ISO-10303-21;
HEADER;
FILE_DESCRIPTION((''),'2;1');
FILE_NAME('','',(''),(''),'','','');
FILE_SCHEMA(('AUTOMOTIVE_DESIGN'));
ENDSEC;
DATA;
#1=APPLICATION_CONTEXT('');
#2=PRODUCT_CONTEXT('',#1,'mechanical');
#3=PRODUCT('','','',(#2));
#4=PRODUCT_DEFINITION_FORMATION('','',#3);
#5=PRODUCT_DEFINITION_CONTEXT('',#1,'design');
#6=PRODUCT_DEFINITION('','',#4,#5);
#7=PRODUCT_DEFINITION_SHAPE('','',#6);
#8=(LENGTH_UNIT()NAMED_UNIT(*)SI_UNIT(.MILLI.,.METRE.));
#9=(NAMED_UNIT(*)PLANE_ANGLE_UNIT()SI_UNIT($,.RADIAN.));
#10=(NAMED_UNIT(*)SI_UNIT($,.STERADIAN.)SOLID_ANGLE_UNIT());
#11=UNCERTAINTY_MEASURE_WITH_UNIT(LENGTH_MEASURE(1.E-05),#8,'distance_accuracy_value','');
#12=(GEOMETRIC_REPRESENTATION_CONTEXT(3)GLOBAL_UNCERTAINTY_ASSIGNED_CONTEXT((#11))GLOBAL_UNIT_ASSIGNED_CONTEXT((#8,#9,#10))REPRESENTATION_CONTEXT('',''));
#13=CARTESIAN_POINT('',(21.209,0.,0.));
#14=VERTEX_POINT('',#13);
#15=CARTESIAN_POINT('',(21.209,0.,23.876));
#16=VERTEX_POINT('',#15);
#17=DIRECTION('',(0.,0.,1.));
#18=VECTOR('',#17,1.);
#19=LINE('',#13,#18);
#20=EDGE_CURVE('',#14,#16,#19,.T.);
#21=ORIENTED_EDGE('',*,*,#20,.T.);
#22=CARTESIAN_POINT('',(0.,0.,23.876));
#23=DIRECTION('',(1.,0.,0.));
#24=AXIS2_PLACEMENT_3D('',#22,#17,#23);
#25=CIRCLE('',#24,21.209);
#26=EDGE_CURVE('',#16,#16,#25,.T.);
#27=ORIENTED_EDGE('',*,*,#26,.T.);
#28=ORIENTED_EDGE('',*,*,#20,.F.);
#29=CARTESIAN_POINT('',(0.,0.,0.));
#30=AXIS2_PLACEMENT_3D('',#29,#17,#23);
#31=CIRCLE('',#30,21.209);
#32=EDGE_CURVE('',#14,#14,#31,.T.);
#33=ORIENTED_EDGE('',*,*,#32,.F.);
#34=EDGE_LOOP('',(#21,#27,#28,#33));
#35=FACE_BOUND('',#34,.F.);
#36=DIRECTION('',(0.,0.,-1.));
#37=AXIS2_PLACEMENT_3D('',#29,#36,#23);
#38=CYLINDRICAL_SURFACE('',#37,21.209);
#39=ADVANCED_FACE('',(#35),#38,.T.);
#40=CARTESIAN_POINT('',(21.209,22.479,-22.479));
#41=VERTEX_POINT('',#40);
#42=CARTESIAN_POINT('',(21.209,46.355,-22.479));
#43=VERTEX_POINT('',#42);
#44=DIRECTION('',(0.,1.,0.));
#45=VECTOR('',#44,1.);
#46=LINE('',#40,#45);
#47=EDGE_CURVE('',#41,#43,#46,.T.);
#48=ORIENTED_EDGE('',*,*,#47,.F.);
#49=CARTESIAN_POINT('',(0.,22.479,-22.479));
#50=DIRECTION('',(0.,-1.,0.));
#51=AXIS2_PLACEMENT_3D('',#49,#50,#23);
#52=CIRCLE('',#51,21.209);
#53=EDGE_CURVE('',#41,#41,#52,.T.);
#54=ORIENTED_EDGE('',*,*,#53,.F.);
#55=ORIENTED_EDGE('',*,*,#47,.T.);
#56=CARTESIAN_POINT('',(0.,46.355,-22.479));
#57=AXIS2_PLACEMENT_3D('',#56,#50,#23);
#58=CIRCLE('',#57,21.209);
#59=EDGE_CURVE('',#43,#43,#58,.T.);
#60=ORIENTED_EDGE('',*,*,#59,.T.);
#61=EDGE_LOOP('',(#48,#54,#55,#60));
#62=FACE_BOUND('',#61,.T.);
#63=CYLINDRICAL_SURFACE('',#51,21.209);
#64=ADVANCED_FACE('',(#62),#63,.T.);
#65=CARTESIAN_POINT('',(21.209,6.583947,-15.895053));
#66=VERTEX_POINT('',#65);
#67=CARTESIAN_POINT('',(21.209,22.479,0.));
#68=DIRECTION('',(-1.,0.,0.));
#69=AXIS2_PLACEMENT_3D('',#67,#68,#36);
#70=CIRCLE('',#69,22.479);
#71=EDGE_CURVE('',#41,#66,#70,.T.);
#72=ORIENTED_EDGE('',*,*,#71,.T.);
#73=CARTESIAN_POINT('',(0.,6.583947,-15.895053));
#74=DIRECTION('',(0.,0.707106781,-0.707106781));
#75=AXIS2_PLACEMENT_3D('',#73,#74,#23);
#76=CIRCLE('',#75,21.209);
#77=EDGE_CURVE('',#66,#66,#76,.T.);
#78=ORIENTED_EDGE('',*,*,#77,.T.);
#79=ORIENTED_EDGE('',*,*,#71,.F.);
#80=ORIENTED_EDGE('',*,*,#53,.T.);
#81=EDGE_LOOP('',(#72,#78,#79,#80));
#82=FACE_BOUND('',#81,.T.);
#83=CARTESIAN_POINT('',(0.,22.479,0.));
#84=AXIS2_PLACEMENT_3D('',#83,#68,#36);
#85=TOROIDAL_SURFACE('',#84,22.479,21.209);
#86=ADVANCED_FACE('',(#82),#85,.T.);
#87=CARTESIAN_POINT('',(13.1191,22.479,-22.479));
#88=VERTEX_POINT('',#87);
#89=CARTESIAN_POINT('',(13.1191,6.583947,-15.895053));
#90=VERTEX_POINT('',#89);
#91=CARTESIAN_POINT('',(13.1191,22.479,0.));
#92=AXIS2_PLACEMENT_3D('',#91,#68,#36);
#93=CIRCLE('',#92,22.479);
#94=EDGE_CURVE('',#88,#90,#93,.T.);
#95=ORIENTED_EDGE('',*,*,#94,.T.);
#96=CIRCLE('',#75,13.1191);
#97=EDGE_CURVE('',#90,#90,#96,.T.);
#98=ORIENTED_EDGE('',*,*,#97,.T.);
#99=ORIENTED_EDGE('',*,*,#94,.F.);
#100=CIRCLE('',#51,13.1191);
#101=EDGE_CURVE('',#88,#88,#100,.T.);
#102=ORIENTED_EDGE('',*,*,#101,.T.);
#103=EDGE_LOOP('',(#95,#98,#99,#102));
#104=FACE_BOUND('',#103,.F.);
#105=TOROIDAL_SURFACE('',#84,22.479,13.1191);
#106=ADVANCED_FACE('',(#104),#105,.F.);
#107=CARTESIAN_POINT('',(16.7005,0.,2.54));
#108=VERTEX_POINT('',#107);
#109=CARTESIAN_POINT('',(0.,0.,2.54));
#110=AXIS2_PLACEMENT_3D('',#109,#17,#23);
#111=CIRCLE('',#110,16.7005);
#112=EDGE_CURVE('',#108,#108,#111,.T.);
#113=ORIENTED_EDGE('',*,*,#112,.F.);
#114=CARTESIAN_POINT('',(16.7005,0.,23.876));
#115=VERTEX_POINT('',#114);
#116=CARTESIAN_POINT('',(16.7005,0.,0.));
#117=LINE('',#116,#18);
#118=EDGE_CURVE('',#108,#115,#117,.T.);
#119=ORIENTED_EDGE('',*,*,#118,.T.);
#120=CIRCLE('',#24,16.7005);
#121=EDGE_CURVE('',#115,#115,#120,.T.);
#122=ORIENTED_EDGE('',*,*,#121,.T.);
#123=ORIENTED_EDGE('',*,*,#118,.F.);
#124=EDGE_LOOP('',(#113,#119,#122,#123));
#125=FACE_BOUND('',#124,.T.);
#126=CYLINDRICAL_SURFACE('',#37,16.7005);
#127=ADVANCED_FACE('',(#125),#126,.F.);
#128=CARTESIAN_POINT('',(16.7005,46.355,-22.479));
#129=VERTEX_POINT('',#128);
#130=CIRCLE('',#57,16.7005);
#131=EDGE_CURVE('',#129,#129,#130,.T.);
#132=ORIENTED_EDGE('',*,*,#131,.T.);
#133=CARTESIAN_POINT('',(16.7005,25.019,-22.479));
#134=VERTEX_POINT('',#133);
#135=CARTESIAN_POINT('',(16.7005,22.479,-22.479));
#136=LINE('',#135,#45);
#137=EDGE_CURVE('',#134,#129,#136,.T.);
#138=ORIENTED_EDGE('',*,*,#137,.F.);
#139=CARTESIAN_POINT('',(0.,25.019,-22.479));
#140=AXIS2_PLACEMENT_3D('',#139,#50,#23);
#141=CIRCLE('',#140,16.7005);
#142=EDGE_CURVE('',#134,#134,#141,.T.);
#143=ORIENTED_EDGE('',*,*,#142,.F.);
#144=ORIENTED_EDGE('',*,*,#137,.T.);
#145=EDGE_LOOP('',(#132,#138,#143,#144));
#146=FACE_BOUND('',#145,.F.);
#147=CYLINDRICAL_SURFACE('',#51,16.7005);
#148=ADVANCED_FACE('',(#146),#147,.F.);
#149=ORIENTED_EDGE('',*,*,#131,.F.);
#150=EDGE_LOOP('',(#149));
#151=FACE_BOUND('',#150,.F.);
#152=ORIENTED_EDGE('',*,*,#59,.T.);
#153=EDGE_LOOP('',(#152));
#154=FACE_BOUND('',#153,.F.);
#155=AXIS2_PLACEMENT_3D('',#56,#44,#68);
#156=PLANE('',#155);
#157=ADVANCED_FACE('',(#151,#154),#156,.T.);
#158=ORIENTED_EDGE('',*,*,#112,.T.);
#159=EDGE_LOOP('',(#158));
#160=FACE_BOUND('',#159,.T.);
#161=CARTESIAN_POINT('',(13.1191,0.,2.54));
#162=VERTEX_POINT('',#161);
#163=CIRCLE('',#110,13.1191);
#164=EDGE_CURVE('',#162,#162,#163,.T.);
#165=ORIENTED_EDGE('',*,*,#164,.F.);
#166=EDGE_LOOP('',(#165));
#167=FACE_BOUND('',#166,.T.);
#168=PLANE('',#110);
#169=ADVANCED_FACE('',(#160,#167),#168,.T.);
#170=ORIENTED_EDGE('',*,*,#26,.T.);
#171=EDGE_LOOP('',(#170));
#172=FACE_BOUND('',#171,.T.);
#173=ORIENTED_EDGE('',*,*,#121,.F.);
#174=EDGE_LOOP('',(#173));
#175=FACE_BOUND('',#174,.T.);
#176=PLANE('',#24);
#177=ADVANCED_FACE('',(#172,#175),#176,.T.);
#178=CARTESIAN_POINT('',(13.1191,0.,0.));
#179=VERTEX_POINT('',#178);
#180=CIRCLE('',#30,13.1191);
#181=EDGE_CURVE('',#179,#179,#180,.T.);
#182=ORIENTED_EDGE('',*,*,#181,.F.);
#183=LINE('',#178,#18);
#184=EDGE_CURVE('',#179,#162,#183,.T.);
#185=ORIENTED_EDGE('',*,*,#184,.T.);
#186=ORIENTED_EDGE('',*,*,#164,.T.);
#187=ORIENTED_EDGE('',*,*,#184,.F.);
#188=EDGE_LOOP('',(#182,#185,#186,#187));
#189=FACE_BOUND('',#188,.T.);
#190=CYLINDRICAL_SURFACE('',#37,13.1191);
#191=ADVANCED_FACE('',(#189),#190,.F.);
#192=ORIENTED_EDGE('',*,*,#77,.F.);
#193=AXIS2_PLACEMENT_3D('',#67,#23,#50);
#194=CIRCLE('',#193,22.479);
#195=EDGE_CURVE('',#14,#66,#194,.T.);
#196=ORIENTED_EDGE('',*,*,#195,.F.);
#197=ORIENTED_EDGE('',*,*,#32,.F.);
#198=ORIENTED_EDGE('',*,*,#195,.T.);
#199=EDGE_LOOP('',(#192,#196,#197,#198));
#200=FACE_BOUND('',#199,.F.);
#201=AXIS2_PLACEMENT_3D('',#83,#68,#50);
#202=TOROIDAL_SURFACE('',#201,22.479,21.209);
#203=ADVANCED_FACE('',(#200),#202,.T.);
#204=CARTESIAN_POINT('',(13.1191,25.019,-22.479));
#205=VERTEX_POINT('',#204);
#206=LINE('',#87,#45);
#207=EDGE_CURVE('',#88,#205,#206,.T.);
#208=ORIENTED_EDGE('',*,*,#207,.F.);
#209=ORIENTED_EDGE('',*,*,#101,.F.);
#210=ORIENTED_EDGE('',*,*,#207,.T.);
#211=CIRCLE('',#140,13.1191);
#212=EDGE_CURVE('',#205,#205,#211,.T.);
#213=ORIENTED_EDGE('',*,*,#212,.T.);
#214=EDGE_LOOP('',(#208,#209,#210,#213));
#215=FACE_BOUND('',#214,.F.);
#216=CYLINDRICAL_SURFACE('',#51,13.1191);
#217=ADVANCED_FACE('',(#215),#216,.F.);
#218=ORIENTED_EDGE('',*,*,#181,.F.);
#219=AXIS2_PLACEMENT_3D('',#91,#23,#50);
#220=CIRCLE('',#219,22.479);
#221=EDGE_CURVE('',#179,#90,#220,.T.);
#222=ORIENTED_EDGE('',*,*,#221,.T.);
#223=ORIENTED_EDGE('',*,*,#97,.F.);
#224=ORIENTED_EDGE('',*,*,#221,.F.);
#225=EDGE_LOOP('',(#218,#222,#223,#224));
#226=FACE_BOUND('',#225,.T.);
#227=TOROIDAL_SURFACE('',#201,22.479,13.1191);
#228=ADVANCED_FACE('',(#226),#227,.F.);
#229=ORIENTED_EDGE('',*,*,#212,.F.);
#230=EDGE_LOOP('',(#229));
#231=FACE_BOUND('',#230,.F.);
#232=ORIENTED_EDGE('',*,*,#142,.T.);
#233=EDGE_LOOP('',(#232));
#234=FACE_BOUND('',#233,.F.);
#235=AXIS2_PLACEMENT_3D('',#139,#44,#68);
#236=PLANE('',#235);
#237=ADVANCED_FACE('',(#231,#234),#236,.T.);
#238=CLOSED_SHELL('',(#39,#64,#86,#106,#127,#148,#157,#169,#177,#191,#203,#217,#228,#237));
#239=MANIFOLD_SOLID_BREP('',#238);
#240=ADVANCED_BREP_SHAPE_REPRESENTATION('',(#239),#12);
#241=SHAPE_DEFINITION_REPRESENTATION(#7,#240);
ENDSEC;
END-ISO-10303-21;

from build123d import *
from build123d import SkipClean  # not in build123d's __all__

# Parameters (mm, degrees)
F0_R        = 16.7005
F0_R_2      = 13.1191
F1_DEPTH    = 2.54
F0_R_3      = 21.209
F2_DEPTH    = 23.876
F2_FACE_R   = 21.209
F2_FACE_R_2 = 13.1191
F5_ANGLE    = 45


with BuildPart() as f1:
    # F0 (on Top) → F1 (new body)
    with BuildSketch(Plane.XY):
        Circle(F0_R)
        Circle(F0_R_2, mode=Mode.SUBTRACT)
    extrude(amount=F1_DEPTH)

    # F0 (on Top) → F2 (join)
    with BuildSketch(Plane.XY):
        Circle(F0_R_3)
        Circle(F0_R, mode=Mode.SUBTRACT)
    extrude(amount=F2_DEPTH)

    # F2_face (on face) → F5 (revolve)
    with BuildSketch(Plane(origin=(0, 0, 0), x_dir=(1, 0, 0), z_dir=(0, 0, -1))):
        Circle(F2_FACE_R)
        Circle(F2_FACE_R_2, mode=Mode.SUBTRACT)
    revolve(axis=Axis((12.7, 22.479, 0), (1, 0, 0)), revolution_arc=F5_ANGLE)

    # F6: F1 across face


with BuildPart() as f1_1:
    add(f1.part, clean=False)
    with SkipClean():  # cleaning this boolean's faces spoils the solid; the shape is the same uncleaned
        add(f1.part.mirror(Plane(origin=(0, 6.5839466657, -15.8950533343), x_dir=(-1, 0, 0), z_dir=(0, 0.7071067812, -0.7071067812))), clean=False)


solid = f1_1.part
